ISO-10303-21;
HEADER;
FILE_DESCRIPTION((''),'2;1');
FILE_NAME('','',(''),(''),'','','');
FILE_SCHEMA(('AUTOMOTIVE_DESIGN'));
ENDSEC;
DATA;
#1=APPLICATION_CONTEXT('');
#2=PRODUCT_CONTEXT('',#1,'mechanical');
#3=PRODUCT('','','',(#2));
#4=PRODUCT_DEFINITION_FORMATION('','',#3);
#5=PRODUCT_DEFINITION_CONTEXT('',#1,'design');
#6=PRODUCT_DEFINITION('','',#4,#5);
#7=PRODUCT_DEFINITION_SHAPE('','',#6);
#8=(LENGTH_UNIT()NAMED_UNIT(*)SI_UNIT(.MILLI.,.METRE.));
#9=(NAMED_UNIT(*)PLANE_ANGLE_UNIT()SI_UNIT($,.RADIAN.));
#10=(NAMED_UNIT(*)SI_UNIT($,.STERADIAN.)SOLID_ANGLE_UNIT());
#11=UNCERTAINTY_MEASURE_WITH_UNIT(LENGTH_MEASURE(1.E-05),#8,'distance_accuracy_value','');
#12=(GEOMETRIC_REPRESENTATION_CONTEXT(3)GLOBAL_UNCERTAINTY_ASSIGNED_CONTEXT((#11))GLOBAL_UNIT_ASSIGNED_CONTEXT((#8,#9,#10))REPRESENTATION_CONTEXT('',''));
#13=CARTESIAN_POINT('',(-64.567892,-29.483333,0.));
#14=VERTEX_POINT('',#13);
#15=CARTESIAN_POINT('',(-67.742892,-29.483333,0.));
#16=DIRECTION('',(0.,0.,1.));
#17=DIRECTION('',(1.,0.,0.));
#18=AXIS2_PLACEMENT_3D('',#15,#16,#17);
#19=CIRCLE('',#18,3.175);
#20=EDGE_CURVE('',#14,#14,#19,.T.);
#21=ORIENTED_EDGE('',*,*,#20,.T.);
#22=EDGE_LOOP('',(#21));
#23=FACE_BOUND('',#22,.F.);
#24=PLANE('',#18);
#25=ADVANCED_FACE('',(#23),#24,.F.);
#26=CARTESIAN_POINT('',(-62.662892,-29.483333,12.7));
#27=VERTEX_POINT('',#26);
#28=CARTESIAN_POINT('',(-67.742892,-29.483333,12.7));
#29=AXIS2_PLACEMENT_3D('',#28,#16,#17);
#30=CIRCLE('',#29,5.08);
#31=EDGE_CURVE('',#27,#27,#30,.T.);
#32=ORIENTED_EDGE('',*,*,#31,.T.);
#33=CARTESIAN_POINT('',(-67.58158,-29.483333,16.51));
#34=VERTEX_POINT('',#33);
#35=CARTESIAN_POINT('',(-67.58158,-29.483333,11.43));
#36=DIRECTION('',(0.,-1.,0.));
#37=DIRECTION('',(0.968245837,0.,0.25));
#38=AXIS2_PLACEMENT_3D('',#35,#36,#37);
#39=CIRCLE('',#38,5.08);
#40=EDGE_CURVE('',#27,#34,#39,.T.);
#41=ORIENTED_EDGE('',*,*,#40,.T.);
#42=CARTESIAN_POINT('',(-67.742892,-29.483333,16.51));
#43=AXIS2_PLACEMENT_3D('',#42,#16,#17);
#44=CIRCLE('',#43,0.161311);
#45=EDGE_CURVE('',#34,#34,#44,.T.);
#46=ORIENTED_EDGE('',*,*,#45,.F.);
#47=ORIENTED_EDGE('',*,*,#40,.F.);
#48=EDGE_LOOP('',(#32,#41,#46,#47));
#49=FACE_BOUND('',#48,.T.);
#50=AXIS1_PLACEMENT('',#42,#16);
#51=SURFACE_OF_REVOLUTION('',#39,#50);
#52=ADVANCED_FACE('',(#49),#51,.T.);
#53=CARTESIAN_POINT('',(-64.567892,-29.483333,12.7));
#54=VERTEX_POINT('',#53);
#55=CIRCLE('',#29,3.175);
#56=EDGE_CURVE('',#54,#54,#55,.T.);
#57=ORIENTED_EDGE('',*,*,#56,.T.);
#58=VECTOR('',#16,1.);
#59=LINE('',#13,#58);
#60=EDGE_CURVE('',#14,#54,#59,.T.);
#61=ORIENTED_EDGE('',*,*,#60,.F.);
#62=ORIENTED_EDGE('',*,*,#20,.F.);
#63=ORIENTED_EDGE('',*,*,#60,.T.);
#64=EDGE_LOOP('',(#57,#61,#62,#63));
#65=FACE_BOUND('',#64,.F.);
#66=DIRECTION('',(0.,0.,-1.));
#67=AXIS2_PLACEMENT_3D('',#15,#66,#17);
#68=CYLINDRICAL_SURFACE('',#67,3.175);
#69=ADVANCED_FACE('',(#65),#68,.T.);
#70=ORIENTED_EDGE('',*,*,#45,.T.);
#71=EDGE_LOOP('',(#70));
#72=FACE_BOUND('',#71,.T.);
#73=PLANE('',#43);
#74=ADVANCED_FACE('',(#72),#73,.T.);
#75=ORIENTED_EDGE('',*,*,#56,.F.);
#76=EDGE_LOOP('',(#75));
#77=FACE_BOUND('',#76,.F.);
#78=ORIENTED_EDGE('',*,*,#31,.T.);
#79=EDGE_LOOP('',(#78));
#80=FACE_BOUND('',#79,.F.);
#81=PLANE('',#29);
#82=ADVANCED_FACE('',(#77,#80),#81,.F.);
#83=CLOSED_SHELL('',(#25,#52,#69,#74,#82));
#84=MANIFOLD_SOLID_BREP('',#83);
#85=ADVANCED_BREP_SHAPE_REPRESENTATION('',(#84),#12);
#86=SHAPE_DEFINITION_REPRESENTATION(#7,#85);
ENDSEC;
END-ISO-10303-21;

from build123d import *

# Parameters (mm, degrees)
F0_R     = 3.175
F1_DEPTH = 12.7
F2_R     = 5.08
F3_DEPTH = 3.81


# Not quite as in the source:
# - a fillet or chamfer that OpenCascade refuses, or shapes differently, is made with other operations: its cross-section is extruded or revolved along the edge and cut away or added


with BuildPart() as f1:
    # F0 (on Top) → F1 (new body)
    with BuildSketch(Plane.XY):
        with Locations((-67.7428916097, -29.48333323)):
            Circle(F0_R)
    extrude(amount=F1_DEPTH)

    # F2 (on face) → F3 (join)
    with BuildSketch(Plane.XY.offset(12.7)):
        with Locations((-67.7428916097, -29.48333323)):
            Circle(F2_R)
    extrude(amount=F3_DEPTH)

    # F4: fillet of radius 5.08 on 1 edges, made by hand

    # F4_s1 → F4_t2 (revolve, cut)
    with BuildSketch(Plane.XZ.offset(29.48333323)):
        with BuildLine():
            ThreePointArc((-62.6628916097, 12.7), (-64.470728486, 15.4460926284), (-67.5815804594, 16.51))
            Line((-67.5815804594, 16.51), (-62.6628916097, 16.51))
            Line((-62.6628916097, 16.51), (-62.6628916097, 12.7))
        make_face()
    revolve(axis=Axis((-67.7428916097, -29.48333323, 16.51), (0, 0, 1)), mode=Mode.SUBTRACT)


solid = f1.part
